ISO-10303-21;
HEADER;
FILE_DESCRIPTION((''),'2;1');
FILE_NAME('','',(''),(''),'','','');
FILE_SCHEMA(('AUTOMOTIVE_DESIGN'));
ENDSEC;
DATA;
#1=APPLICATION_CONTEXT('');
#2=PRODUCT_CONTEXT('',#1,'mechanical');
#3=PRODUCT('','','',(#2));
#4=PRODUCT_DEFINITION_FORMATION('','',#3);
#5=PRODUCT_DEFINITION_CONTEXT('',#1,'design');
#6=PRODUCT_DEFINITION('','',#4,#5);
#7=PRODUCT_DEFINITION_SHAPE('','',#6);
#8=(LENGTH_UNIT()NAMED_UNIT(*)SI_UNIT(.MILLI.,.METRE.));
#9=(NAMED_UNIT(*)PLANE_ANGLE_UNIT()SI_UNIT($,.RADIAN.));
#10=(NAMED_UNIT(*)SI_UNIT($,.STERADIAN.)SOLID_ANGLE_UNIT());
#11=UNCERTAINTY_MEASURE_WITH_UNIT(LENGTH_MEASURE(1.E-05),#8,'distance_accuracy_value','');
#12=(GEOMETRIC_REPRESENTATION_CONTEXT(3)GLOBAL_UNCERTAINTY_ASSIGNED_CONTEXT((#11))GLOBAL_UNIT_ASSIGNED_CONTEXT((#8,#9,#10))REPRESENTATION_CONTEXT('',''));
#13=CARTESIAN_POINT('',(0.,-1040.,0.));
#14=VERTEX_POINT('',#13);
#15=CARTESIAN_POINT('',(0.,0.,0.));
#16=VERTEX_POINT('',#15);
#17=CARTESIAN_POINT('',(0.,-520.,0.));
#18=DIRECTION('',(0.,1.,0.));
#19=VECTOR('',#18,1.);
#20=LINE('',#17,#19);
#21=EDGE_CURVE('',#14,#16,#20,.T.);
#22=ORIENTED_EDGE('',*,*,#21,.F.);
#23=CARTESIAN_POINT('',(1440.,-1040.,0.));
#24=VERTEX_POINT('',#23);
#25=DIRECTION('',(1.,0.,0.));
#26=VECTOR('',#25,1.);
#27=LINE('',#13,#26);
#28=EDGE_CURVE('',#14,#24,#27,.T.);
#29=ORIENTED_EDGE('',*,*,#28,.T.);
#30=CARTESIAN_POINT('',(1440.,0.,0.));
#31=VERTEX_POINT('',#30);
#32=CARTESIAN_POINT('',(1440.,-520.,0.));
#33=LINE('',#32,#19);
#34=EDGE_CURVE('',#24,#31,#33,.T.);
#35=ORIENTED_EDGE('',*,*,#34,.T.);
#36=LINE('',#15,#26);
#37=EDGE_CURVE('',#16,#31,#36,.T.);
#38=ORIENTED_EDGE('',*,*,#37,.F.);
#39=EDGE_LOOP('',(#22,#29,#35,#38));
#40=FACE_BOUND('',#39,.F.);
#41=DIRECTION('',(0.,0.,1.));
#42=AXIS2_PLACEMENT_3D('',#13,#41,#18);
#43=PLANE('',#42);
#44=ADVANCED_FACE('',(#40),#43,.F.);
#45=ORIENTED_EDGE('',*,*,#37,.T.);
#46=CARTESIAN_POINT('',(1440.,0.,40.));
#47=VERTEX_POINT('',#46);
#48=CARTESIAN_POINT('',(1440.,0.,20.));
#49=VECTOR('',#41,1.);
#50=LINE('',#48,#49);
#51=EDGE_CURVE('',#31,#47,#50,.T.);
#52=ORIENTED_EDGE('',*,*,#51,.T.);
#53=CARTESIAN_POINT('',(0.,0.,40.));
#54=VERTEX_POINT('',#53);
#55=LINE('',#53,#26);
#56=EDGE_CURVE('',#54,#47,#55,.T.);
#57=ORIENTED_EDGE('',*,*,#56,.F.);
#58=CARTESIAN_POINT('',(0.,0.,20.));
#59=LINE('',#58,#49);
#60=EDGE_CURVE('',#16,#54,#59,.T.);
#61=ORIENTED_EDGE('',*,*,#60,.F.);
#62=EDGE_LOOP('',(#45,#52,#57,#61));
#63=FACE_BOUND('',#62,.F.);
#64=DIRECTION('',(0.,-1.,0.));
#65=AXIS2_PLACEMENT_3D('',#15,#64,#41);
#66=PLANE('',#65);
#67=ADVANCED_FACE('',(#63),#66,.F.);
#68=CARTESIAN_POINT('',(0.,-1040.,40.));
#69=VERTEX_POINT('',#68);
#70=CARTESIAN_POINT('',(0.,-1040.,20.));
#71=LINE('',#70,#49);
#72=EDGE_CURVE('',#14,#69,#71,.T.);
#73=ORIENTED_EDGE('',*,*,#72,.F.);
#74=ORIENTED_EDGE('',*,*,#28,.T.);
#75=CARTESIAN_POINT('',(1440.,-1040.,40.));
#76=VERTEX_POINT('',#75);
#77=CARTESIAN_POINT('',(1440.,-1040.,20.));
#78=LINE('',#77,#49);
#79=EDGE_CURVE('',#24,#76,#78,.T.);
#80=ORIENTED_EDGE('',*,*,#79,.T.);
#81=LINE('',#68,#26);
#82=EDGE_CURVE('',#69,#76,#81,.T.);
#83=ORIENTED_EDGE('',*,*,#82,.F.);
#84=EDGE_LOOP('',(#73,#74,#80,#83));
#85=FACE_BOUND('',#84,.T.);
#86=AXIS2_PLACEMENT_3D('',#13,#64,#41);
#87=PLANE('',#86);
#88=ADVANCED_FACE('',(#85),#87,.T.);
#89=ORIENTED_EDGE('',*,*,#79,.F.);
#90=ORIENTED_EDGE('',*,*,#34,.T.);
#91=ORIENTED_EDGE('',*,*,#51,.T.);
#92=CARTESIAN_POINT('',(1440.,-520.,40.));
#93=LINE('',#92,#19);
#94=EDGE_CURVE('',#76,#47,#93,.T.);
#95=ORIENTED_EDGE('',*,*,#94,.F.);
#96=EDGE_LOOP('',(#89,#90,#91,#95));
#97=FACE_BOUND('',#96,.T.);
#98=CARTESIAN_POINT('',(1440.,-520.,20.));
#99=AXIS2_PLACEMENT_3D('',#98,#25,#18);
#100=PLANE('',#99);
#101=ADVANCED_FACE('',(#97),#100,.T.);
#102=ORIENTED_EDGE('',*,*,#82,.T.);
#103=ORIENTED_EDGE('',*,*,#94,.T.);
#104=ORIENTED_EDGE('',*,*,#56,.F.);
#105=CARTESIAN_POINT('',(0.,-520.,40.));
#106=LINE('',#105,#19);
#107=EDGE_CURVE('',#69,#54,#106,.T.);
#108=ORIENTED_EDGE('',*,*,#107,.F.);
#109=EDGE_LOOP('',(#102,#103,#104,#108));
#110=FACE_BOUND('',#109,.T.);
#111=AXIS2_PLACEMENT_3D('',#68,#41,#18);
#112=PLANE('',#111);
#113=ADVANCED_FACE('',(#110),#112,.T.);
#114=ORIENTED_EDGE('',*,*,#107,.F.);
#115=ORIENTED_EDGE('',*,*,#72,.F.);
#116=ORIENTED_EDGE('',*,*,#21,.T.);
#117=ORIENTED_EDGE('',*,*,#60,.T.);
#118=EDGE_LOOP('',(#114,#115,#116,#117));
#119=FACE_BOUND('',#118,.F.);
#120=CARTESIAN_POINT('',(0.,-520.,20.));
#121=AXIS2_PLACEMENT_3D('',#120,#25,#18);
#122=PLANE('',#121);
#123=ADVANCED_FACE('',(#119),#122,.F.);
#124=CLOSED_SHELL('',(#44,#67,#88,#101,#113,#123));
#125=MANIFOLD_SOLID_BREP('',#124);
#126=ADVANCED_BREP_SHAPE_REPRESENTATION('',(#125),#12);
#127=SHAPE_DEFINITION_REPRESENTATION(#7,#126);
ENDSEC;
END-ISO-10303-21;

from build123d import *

# Parameters (mm, degrees)
F0_W     = 1040
F0_H     = 40
F1_DEPTH = 1440


# Not quite as in the source:
# - a feature of the source that left no trace in its solid (it failed there, or was rolled back) is left out


with BuildPart() as f1:
    # F0 (on Right) → F1 (new body)
    with BuildSketch(Plane.YZ):
        with Locations((-520, 20)):
            Rectangle(F0_W, F0_H)
    extrude(amount=F1_DEPTH)


solid = f1.part
